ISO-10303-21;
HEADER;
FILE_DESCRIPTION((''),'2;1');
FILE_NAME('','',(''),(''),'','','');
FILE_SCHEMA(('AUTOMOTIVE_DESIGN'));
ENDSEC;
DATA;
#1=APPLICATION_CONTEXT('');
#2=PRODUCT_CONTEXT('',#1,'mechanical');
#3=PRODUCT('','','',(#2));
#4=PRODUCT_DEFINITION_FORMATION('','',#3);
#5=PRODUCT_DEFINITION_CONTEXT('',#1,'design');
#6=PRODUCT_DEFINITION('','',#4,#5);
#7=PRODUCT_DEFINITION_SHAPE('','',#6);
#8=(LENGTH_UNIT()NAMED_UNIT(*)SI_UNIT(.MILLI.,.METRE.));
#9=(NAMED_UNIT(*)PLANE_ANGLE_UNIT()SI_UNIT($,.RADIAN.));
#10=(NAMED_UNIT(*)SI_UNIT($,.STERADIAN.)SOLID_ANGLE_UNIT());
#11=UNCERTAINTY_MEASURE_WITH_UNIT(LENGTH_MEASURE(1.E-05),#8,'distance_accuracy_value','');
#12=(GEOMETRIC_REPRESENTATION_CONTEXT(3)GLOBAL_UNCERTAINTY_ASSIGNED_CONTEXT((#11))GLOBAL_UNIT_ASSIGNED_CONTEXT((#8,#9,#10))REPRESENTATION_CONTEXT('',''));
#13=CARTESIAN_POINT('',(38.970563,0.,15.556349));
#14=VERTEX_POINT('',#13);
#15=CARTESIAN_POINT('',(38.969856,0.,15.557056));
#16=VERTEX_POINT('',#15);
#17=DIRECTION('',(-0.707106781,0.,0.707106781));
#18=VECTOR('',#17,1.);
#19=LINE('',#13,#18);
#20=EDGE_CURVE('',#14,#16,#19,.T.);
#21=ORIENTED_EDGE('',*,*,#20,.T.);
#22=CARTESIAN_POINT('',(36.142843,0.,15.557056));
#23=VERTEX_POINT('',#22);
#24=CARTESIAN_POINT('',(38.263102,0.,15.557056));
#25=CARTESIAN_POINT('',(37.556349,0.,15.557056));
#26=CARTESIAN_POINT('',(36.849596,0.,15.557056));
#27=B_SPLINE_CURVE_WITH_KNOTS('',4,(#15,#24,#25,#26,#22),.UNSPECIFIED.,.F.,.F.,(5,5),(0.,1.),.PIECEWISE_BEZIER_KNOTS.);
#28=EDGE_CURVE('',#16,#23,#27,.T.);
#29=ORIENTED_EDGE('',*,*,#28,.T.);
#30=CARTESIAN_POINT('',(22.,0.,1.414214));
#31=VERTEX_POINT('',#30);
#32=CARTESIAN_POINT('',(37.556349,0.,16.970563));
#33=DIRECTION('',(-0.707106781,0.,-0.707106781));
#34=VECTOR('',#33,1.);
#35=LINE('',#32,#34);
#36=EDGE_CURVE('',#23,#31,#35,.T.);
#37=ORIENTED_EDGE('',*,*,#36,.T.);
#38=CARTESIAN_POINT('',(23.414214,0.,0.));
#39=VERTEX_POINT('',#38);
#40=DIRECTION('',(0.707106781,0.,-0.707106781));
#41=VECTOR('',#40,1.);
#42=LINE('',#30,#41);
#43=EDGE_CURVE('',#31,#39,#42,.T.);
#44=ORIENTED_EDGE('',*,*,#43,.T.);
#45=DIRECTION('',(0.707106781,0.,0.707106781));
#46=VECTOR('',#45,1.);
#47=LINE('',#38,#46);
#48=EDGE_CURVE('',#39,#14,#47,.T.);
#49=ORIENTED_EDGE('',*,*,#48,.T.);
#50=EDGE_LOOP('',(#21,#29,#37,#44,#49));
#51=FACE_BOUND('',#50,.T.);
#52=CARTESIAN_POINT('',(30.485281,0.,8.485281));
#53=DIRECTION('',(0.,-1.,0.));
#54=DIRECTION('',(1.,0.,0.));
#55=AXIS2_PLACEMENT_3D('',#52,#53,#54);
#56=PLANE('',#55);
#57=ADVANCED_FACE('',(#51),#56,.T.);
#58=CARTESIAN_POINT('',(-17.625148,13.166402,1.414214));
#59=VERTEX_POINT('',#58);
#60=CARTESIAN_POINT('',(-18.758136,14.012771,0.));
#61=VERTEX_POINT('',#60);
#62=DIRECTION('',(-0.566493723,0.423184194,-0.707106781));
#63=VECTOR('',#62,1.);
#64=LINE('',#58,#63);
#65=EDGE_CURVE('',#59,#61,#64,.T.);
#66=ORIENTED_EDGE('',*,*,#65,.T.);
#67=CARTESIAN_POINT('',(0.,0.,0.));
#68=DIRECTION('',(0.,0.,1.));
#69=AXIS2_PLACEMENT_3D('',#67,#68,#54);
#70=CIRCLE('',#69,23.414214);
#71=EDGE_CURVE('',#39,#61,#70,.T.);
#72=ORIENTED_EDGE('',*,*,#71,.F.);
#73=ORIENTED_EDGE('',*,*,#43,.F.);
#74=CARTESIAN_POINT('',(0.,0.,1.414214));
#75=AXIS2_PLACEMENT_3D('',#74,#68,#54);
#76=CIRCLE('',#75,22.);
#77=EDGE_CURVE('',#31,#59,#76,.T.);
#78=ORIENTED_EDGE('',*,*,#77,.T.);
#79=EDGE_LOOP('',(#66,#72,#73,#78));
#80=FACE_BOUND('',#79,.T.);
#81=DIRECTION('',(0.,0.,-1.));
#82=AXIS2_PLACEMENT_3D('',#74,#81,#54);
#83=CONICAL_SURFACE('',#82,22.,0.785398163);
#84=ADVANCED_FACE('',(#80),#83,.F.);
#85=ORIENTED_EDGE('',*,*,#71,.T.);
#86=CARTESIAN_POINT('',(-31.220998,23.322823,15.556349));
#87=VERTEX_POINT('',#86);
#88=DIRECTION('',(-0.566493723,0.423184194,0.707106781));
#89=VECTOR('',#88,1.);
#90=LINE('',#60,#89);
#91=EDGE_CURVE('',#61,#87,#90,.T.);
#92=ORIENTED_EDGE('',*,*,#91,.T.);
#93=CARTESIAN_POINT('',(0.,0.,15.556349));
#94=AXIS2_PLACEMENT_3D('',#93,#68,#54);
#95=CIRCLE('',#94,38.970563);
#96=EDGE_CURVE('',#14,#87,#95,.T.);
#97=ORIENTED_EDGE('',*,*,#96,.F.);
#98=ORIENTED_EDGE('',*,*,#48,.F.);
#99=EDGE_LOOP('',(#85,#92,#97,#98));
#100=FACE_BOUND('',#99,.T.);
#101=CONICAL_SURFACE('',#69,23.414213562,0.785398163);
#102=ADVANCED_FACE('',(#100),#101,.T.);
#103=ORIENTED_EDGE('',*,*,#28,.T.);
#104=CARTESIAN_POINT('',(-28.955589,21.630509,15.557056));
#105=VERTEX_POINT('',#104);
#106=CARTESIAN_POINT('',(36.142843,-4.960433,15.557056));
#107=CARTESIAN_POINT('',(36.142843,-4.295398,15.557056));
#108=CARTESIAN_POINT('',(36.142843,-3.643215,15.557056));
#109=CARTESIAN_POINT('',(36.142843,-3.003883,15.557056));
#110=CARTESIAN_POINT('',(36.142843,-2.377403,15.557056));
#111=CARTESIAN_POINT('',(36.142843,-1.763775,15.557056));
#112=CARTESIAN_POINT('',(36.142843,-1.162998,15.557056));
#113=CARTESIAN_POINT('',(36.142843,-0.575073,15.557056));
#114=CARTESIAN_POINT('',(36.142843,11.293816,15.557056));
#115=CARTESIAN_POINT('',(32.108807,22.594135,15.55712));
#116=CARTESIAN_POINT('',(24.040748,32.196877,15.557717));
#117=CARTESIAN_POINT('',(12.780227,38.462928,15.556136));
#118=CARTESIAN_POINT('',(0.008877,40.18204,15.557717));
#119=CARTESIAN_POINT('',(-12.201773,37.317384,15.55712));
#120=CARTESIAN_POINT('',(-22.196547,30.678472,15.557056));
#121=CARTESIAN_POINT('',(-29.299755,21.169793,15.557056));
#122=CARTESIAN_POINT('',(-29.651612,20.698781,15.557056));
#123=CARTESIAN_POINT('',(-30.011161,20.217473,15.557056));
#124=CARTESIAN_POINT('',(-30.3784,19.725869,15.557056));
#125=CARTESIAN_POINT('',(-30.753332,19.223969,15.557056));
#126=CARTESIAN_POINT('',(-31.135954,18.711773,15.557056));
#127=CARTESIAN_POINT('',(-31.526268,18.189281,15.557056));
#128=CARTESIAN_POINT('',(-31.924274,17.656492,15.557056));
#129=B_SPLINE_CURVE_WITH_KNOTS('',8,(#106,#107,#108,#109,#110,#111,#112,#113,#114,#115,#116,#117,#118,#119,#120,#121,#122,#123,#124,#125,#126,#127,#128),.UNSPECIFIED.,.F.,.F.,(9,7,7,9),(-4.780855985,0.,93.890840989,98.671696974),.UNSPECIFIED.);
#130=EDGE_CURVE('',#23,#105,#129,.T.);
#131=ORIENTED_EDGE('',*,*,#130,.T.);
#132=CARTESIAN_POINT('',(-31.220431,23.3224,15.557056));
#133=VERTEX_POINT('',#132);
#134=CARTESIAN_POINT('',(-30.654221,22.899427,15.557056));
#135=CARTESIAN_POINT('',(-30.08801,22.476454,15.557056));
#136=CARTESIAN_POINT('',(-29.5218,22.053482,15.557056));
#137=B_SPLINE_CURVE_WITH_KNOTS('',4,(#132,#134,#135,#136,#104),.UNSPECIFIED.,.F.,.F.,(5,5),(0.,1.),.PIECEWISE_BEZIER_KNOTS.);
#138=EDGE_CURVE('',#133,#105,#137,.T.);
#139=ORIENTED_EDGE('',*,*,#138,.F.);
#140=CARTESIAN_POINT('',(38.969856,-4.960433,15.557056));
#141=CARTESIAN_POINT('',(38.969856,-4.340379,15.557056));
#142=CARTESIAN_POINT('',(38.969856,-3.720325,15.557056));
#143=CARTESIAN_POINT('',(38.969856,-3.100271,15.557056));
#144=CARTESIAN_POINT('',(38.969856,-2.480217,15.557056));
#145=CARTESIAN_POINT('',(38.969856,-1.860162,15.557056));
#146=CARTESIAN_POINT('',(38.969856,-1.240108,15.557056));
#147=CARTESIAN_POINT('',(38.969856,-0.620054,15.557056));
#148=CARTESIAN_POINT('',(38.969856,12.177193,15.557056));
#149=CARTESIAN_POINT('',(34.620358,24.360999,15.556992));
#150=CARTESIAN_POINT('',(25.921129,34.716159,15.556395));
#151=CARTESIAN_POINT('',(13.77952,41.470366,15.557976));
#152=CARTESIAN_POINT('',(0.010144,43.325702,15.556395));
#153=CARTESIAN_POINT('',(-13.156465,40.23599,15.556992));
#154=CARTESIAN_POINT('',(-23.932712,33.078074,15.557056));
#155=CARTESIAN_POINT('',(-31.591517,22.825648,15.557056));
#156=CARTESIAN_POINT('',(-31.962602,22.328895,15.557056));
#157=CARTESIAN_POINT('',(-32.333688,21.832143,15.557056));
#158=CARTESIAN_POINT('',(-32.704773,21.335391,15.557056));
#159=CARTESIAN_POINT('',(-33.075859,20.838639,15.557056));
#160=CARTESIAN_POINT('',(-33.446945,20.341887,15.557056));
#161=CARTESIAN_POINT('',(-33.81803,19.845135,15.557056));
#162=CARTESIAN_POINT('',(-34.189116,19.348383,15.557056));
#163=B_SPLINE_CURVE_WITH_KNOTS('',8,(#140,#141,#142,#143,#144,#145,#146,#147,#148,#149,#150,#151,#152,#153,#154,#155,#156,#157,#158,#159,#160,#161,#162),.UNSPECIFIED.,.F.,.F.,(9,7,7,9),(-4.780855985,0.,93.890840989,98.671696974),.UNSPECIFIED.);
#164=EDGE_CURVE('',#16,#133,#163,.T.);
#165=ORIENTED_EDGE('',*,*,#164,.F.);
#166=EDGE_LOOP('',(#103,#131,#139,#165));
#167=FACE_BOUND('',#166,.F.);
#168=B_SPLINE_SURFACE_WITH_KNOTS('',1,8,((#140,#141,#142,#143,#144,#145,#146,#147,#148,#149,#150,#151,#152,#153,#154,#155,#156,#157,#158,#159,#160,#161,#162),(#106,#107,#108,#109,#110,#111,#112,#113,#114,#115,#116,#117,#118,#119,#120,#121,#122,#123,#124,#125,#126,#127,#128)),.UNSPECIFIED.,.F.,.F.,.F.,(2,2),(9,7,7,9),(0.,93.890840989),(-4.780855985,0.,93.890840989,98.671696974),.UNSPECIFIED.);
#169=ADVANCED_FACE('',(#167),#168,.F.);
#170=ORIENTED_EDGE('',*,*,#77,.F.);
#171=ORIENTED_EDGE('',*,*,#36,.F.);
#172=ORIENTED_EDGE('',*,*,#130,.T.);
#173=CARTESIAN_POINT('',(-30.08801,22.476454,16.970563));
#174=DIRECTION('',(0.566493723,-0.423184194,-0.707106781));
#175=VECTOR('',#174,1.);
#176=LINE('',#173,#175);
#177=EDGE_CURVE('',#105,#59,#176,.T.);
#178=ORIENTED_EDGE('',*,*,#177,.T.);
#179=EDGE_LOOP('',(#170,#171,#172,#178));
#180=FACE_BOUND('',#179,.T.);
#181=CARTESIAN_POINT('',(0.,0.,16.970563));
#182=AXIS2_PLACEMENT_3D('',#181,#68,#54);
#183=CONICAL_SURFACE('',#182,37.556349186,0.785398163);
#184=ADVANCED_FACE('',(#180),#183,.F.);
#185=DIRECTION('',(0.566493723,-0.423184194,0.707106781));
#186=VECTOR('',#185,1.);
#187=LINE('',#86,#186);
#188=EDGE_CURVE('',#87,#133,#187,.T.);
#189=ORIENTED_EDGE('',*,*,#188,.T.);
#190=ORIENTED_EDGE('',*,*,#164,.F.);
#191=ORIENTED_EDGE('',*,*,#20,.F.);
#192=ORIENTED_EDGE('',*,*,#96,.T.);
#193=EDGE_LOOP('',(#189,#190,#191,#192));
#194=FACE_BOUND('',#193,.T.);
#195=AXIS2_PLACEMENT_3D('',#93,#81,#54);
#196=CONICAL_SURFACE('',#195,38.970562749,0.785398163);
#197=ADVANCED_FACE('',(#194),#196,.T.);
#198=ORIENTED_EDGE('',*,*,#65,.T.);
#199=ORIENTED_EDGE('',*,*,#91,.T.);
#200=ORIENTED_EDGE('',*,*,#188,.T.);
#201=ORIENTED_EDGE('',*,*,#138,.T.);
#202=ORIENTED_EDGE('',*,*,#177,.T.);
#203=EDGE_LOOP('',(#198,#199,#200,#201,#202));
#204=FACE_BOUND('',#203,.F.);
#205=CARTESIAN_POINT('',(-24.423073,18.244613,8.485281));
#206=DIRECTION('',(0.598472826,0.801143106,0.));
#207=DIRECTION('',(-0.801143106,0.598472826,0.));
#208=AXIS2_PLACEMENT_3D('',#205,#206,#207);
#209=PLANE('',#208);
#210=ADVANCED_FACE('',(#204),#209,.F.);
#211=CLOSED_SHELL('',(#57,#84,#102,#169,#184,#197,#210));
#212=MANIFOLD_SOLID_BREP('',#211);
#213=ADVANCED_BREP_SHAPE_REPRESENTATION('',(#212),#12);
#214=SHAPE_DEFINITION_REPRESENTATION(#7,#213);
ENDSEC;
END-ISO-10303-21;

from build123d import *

# Parameters (mm, degrees)
F1_ANGLE = 143.2394
F2_SIZE2 = 1.999
F2_SIZE  = 1.999


# Not quite as in the source:
# - a fillet or chamfer is up to 0.001 mm smaller than in the source, because OpenCascade refuses the exact size
# - a feature names something its author has since deleted; it is built from what else it names


with BuildPart() as f1:
    # F0 (on Front) → F1 (revolve)
    with BuildSketch(Plane.XZ):
        Polygon((23.4142135624, 0), (38.9705627485, 15.5563491861), (37.5563491861, 16.9705627485), (22, 1.4142135624), align=None)
    revolve(axis=Axis((0, 0, 11), (0, 0, 1)), revolution_arc=F1_ANGLE)

    # F2 (size 2 and 2 in the source; OpenCascade refuses exactly that, so slightly less here)
    f2_edges = [f1.edges().sort_by_distance(p)[0] for p in [
        (11.842372, 35.640393, 16.970563),
    ]]
    chamfer(f2_edges, length=F2_SIZE, length2=F2_SIZE2)


solid = f1.part
